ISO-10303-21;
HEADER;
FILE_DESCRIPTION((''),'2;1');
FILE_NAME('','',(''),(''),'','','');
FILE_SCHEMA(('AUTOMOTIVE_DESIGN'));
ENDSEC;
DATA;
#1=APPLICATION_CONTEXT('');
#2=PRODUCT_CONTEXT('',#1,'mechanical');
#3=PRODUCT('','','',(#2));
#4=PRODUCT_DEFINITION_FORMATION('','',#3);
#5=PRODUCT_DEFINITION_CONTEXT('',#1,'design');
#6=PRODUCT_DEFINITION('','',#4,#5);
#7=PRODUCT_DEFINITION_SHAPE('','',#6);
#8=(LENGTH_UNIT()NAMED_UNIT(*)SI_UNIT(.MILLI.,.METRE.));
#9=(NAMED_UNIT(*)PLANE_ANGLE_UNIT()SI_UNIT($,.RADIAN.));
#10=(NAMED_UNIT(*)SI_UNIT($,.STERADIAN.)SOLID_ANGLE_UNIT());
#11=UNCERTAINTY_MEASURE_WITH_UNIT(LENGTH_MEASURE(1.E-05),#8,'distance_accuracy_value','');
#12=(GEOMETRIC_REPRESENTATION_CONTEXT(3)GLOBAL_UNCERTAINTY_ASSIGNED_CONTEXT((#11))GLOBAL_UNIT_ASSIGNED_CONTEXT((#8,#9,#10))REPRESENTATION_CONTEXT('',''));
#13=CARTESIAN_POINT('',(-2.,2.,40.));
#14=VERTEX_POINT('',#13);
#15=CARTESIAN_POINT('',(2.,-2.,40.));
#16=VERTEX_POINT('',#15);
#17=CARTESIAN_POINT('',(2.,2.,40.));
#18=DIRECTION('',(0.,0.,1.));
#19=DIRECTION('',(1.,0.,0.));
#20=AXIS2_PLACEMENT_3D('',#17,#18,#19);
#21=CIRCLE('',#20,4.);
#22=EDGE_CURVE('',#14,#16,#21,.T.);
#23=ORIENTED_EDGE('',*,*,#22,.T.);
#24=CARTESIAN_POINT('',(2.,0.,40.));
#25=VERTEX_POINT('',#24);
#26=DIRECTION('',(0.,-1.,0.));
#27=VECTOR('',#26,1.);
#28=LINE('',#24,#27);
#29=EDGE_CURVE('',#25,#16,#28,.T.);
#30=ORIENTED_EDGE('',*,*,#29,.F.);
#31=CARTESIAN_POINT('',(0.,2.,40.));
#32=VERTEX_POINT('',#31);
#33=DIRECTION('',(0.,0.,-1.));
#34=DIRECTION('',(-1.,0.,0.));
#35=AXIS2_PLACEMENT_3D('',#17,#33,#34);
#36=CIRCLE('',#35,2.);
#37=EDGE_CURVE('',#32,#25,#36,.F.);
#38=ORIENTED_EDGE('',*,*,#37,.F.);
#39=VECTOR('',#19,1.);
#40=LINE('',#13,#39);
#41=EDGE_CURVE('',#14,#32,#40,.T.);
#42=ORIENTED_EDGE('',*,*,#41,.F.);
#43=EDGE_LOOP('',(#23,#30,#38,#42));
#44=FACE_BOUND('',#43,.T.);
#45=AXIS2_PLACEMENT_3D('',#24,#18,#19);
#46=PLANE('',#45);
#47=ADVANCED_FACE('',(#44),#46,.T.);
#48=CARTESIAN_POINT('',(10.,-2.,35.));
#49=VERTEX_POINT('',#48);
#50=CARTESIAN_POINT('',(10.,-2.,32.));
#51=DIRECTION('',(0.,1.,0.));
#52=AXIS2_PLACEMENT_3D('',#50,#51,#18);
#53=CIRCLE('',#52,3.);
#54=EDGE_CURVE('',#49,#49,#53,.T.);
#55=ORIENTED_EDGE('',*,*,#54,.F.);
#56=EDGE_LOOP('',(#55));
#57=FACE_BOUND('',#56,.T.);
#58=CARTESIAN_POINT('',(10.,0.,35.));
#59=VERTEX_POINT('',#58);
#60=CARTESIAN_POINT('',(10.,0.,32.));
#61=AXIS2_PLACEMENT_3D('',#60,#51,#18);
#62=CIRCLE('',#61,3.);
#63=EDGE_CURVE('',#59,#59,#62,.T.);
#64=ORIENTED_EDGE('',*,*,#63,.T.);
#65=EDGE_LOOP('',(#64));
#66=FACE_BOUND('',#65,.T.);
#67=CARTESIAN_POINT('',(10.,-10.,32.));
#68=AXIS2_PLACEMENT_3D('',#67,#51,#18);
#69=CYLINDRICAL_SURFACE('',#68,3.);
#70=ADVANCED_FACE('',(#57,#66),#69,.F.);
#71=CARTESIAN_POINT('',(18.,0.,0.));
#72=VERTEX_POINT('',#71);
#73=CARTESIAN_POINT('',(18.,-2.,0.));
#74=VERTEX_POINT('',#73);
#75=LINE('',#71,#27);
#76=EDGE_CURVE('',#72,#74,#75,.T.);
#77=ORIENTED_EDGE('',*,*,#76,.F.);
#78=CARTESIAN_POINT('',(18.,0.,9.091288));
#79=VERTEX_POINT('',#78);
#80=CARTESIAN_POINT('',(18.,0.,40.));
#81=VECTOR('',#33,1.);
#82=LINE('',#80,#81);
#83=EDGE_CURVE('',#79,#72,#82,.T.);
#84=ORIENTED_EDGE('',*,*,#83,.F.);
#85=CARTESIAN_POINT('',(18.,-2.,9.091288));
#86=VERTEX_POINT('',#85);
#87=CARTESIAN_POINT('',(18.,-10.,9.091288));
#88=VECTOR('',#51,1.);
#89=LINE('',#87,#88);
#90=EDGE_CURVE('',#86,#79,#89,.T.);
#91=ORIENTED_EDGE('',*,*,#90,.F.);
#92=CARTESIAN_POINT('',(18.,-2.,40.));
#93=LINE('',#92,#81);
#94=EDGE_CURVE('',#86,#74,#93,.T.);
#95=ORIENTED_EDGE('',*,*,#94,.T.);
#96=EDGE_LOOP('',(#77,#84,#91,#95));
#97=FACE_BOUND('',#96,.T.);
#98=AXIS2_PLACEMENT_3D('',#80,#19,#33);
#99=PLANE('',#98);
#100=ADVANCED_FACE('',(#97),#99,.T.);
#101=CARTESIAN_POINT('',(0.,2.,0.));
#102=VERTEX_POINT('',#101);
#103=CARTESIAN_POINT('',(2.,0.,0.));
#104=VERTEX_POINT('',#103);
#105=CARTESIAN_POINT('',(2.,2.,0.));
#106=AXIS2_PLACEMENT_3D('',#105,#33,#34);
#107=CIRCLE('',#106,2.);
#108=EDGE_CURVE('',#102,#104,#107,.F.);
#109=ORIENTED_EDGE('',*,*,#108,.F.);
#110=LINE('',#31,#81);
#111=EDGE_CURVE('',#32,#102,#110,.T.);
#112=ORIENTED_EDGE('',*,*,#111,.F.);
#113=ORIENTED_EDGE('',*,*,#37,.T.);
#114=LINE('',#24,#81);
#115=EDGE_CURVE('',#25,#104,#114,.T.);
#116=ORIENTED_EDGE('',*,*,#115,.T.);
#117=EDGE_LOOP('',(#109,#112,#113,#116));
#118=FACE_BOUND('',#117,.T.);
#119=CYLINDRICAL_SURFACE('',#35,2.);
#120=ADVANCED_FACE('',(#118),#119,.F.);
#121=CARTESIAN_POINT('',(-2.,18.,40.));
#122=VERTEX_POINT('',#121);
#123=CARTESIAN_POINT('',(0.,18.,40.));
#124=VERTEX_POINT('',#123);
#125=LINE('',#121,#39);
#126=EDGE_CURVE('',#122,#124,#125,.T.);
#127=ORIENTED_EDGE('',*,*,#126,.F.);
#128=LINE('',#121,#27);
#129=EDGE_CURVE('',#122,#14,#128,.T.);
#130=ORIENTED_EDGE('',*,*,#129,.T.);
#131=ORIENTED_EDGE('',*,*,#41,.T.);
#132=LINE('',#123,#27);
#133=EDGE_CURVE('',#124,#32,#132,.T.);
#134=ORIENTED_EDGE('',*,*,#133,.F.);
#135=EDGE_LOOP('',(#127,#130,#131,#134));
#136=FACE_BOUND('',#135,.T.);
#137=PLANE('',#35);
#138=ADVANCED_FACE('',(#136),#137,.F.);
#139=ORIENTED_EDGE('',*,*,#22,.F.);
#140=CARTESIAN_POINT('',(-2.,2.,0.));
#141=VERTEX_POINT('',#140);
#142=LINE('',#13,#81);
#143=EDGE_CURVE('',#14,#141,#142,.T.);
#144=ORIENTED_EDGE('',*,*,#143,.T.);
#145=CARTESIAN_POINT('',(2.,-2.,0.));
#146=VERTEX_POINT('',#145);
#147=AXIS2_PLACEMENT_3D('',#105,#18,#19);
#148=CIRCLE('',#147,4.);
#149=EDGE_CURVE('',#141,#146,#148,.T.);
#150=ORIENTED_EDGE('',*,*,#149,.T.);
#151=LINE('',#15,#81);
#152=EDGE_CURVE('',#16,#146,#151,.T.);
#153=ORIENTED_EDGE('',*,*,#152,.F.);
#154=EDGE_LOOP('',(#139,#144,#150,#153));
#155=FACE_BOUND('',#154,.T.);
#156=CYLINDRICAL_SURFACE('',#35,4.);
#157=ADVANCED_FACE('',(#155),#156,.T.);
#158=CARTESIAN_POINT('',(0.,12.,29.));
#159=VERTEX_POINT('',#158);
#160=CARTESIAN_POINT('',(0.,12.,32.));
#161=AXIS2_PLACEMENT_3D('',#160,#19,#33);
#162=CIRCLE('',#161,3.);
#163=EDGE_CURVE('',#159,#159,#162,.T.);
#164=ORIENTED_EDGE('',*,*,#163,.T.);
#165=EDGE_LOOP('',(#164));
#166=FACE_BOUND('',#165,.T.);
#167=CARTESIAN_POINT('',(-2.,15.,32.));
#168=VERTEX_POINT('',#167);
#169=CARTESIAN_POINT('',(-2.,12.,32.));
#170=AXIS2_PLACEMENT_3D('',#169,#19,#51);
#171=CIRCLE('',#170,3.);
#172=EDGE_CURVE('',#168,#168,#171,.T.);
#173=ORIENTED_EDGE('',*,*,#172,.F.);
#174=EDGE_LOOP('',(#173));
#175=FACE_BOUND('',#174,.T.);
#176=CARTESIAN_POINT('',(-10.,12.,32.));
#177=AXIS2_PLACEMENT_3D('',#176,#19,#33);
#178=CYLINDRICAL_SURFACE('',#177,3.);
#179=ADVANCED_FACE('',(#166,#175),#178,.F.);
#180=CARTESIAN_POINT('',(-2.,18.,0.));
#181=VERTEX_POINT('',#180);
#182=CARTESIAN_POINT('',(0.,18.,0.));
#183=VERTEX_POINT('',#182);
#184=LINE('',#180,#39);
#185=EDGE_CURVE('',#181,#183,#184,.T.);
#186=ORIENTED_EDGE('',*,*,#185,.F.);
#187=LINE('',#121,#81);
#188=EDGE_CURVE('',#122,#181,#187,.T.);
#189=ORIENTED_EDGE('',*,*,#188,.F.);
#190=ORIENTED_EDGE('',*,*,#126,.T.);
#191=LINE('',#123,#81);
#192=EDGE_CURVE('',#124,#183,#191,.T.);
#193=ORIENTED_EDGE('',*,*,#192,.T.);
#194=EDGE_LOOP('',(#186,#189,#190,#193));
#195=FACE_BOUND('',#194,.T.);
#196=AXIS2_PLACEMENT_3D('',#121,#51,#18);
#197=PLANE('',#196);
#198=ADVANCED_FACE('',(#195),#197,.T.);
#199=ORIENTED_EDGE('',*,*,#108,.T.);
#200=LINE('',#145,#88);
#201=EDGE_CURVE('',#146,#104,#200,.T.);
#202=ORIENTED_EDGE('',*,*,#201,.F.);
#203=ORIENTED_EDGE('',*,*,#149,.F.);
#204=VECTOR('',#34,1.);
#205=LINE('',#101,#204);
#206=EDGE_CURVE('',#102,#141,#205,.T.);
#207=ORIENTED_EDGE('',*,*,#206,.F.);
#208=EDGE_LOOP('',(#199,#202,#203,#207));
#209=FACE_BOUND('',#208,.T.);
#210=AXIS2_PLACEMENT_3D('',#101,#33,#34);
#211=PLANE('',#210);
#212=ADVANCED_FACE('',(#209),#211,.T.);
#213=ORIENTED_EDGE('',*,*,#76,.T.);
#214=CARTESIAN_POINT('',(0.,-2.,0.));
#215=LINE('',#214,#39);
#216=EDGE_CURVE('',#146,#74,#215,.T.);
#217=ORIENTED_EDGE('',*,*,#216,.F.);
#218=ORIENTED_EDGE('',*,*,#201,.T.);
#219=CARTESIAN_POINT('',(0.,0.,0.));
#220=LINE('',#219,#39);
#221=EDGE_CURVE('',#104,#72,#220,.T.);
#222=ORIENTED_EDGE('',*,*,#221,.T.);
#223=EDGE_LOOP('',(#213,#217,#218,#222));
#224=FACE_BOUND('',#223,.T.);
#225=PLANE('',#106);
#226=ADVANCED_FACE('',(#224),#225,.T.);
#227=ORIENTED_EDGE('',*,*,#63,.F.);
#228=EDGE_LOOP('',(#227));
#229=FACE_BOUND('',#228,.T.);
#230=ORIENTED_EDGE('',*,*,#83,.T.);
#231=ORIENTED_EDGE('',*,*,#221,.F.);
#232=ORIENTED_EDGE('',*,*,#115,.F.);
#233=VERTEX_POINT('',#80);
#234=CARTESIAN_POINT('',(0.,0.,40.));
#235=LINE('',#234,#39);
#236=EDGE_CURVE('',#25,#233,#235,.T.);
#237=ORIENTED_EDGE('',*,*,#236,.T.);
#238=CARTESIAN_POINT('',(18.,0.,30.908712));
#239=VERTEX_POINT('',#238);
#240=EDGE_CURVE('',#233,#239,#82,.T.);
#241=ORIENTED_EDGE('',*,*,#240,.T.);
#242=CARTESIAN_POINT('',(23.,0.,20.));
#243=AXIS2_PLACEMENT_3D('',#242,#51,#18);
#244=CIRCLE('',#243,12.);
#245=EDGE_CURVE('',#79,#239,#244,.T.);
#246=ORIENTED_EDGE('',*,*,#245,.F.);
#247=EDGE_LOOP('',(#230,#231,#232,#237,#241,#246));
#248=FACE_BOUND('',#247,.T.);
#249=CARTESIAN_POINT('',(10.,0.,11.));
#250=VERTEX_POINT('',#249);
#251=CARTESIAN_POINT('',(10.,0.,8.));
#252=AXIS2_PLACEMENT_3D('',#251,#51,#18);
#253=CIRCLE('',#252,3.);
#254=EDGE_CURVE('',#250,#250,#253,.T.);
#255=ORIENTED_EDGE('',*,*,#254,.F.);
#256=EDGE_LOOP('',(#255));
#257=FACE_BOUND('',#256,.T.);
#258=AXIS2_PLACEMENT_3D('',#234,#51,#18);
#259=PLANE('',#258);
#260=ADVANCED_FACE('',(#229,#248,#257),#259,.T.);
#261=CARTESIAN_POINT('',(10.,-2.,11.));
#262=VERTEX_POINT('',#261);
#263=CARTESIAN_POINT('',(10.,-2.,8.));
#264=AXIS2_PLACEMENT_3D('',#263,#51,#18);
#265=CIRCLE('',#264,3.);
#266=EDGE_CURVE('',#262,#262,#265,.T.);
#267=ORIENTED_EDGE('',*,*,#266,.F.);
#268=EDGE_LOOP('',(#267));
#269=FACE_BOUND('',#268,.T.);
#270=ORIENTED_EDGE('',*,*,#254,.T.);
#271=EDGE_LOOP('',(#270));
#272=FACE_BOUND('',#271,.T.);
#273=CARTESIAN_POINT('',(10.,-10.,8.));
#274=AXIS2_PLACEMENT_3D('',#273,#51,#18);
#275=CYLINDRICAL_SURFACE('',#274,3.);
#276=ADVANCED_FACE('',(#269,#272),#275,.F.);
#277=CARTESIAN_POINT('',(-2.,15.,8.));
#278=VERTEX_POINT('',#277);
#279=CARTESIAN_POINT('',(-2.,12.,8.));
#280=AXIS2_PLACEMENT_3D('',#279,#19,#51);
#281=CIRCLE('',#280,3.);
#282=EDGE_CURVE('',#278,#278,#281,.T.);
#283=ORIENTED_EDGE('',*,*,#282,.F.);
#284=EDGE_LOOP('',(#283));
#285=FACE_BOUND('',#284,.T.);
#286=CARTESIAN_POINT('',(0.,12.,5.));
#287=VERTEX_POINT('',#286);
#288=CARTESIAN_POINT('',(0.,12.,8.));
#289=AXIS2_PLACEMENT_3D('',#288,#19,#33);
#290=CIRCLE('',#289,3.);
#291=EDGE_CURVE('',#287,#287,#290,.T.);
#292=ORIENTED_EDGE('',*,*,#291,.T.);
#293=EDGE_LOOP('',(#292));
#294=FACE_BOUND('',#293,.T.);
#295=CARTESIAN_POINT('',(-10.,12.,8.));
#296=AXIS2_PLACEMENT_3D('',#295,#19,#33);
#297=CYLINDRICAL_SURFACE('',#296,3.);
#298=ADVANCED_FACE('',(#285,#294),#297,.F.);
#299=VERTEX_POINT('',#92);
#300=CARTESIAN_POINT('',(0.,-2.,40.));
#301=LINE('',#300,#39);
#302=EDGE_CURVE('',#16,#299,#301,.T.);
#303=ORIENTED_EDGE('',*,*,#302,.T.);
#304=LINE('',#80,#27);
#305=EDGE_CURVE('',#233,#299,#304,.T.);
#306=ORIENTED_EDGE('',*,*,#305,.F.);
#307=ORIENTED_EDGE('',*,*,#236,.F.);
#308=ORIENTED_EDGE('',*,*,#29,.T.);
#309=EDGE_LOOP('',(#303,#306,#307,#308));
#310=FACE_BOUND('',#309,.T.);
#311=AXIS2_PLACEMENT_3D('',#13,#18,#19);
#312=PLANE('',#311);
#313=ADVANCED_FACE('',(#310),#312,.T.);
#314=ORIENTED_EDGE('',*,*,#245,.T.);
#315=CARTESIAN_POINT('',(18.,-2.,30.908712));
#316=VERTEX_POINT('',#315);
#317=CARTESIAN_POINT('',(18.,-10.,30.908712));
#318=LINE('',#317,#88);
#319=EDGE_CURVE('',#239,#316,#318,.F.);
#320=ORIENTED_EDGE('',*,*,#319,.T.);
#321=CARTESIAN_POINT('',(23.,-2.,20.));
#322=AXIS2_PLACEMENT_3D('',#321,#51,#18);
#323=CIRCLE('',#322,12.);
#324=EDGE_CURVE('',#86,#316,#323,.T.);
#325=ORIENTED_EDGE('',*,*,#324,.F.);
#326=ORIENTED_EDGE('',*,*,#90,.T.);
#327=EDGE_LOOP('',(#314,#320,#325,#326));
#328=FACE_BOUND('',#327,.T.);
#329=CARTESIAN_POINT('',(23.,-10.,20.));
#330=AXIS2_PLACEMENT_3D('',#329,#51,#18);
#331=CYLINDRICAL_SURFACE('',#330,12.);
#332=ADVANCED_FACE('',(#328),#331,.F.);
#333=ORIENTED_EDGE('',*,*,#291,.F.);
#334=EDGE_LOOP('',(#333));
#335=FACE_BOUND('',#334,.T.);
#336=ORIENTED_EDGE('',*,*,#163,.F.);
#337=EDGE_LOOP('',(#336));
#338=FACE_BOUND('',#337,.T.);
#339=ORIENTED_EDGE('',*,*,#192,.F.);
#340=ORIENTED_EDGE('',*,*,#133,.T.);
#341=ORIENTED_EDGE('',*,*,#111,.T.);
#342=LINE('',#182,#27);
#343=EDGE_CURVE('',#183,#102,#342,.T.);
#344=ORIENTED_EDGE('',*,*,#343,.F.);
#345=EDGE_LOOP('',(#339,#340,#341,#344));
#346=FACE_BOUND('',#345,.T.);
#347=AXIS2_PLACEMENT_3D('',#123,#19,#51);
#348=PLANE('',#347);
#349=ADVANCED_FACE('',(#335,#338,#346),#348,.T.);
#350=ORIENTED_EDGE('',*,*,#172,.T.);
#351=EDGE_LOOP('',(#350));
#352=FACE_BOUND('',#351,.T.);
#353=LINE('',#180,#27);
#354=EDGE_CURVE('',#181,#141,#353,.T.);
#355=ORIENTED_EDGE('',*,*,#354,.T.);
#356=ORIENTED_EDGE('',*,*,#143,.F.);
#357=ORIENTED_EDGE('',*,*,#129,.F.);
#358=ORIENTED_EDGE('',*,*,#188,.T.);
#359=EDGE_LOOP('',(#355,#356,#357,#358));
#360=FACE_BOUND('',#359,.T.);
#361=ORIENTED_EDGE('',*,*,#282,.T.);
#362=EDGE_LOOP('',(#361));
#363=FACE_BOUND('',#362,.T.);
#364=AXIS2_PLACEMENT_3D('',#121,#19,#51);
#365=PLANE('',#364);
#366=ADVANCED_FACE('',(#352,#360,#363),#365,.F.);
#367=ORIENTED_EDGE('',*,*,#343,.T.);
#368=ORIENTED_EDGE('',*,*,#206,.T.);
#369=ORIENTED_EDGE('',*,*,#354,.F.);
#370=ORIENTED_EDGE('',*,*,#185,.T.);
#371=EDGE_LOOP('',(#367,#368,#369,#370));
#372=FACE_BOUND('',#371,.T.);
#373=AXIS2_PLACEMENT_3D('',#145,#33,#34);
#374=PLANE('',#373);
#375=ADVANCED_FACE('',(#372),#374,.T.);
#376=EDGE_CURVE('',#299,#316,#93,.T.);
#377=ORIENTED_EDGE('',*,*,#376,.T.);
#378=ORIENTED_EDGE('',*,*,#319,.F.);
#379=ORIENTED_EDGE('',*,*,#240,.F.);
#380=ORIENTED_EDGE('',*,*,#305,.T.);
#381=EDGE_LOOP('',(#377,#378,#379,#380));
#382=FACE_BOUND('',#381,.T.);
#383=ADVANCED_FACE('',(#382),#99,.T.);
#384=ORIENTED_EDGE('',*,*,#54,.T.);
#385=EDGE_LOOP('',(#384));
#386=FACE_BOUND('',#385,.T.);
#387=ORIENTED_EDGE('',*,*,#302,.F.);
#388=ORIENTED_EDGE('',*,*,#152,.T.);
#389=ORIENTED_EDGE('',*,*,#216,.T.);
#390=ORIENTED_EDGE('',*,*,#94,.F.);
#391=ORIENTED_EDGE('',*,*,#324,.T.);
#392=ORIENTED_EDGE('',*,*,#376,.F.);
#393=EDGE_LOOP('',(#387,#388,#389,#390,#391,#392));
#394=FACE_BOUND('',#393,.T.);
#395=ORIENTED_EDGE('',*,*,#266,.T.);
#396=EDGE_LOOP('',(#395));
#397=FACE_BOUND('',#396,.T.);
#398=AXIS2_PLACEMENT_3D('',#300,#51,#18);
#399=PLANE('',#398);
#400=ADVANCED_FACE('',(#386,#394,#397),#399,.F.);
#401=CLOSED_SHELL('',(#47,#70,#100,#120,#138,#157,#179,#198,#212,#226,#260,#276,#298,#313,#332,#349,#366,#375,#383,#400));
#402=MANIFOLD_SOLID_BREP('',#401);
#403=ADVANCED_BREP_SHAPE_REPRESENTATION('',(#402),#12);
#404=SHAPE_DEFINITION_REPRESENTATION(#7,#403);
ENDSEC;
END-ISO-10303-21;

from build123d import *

# Parameters (mm, degrees)
BASE_FLANGE2_DEPTH = 40
SKETCH11_R         = 3
CUT_EXTRUDE2_DEPTH = 10
SKETCH12_R         = 12
SKETCH12_R_2       = 3
CUT_EXTRUDE3_DEPTH = 10


# Sheet-metal steps are written as plain solids
with BuildPart() as part:
    # Sketch1 → Base-Flange2 (new body)
    with BuildSketch(Plane.XY):
        with BuildLine():
            Line((0, 18), (0, 2))
            ThreePointArc((0, 2), (0.585786438, 0.585786438), (2, 0))
            Line((2, 0), (18, 0))
            Line((18, 0), (18, -2))
            Line((18, -2), (2, -2))
            ThreePointArc((2, -2), (-0.828427125, -0.828427125), (-2, 2))
            Line((-2, 2), (-2, 18))
            Line((-2, 18), (0, 18))
        make_face()
    extrude(amount=BASE_FLANGE2_DEPTH)

    # Sketch11 → Cut-Extrude2 (cut)
    with BuildSketch(Plane(origin=(0, 0, 0), x_dir=(0, 0, -1), z_dir=(1, 0, 0))):
        with Locations((-32, 12)):
            Circle(SKETCH11_R)
        with Locations((-8, 12)):
            Circle(SKETCH11_R)
    extrude(amount=-CUT_EXTRUDE2_DEPTH, mode=Mode.SUBTRACT)

    # Sketch12 → Cut-Extrude3 (cut)
    with BuildSketch(Plane(origin=(0, 0, 0), x_dir=(1, 0, 0), z_dir=(0, 1, 0))):
        with Locations((23, -20)):
            Circle(SKETCH12_R)
        with Locations(Location((10, -8, 0), (0, 0, 270))):
            Circle(SKETCH12_R_2)
        with Locations(Location((10, -32, 0), (0, 0, 270))):
            Circle(SKETCH12_R_2)
    extrude(amount=-CUT_EXTRUDE3_DEPTH, mode=Mode.SUBTRACT)


solid = part.part
